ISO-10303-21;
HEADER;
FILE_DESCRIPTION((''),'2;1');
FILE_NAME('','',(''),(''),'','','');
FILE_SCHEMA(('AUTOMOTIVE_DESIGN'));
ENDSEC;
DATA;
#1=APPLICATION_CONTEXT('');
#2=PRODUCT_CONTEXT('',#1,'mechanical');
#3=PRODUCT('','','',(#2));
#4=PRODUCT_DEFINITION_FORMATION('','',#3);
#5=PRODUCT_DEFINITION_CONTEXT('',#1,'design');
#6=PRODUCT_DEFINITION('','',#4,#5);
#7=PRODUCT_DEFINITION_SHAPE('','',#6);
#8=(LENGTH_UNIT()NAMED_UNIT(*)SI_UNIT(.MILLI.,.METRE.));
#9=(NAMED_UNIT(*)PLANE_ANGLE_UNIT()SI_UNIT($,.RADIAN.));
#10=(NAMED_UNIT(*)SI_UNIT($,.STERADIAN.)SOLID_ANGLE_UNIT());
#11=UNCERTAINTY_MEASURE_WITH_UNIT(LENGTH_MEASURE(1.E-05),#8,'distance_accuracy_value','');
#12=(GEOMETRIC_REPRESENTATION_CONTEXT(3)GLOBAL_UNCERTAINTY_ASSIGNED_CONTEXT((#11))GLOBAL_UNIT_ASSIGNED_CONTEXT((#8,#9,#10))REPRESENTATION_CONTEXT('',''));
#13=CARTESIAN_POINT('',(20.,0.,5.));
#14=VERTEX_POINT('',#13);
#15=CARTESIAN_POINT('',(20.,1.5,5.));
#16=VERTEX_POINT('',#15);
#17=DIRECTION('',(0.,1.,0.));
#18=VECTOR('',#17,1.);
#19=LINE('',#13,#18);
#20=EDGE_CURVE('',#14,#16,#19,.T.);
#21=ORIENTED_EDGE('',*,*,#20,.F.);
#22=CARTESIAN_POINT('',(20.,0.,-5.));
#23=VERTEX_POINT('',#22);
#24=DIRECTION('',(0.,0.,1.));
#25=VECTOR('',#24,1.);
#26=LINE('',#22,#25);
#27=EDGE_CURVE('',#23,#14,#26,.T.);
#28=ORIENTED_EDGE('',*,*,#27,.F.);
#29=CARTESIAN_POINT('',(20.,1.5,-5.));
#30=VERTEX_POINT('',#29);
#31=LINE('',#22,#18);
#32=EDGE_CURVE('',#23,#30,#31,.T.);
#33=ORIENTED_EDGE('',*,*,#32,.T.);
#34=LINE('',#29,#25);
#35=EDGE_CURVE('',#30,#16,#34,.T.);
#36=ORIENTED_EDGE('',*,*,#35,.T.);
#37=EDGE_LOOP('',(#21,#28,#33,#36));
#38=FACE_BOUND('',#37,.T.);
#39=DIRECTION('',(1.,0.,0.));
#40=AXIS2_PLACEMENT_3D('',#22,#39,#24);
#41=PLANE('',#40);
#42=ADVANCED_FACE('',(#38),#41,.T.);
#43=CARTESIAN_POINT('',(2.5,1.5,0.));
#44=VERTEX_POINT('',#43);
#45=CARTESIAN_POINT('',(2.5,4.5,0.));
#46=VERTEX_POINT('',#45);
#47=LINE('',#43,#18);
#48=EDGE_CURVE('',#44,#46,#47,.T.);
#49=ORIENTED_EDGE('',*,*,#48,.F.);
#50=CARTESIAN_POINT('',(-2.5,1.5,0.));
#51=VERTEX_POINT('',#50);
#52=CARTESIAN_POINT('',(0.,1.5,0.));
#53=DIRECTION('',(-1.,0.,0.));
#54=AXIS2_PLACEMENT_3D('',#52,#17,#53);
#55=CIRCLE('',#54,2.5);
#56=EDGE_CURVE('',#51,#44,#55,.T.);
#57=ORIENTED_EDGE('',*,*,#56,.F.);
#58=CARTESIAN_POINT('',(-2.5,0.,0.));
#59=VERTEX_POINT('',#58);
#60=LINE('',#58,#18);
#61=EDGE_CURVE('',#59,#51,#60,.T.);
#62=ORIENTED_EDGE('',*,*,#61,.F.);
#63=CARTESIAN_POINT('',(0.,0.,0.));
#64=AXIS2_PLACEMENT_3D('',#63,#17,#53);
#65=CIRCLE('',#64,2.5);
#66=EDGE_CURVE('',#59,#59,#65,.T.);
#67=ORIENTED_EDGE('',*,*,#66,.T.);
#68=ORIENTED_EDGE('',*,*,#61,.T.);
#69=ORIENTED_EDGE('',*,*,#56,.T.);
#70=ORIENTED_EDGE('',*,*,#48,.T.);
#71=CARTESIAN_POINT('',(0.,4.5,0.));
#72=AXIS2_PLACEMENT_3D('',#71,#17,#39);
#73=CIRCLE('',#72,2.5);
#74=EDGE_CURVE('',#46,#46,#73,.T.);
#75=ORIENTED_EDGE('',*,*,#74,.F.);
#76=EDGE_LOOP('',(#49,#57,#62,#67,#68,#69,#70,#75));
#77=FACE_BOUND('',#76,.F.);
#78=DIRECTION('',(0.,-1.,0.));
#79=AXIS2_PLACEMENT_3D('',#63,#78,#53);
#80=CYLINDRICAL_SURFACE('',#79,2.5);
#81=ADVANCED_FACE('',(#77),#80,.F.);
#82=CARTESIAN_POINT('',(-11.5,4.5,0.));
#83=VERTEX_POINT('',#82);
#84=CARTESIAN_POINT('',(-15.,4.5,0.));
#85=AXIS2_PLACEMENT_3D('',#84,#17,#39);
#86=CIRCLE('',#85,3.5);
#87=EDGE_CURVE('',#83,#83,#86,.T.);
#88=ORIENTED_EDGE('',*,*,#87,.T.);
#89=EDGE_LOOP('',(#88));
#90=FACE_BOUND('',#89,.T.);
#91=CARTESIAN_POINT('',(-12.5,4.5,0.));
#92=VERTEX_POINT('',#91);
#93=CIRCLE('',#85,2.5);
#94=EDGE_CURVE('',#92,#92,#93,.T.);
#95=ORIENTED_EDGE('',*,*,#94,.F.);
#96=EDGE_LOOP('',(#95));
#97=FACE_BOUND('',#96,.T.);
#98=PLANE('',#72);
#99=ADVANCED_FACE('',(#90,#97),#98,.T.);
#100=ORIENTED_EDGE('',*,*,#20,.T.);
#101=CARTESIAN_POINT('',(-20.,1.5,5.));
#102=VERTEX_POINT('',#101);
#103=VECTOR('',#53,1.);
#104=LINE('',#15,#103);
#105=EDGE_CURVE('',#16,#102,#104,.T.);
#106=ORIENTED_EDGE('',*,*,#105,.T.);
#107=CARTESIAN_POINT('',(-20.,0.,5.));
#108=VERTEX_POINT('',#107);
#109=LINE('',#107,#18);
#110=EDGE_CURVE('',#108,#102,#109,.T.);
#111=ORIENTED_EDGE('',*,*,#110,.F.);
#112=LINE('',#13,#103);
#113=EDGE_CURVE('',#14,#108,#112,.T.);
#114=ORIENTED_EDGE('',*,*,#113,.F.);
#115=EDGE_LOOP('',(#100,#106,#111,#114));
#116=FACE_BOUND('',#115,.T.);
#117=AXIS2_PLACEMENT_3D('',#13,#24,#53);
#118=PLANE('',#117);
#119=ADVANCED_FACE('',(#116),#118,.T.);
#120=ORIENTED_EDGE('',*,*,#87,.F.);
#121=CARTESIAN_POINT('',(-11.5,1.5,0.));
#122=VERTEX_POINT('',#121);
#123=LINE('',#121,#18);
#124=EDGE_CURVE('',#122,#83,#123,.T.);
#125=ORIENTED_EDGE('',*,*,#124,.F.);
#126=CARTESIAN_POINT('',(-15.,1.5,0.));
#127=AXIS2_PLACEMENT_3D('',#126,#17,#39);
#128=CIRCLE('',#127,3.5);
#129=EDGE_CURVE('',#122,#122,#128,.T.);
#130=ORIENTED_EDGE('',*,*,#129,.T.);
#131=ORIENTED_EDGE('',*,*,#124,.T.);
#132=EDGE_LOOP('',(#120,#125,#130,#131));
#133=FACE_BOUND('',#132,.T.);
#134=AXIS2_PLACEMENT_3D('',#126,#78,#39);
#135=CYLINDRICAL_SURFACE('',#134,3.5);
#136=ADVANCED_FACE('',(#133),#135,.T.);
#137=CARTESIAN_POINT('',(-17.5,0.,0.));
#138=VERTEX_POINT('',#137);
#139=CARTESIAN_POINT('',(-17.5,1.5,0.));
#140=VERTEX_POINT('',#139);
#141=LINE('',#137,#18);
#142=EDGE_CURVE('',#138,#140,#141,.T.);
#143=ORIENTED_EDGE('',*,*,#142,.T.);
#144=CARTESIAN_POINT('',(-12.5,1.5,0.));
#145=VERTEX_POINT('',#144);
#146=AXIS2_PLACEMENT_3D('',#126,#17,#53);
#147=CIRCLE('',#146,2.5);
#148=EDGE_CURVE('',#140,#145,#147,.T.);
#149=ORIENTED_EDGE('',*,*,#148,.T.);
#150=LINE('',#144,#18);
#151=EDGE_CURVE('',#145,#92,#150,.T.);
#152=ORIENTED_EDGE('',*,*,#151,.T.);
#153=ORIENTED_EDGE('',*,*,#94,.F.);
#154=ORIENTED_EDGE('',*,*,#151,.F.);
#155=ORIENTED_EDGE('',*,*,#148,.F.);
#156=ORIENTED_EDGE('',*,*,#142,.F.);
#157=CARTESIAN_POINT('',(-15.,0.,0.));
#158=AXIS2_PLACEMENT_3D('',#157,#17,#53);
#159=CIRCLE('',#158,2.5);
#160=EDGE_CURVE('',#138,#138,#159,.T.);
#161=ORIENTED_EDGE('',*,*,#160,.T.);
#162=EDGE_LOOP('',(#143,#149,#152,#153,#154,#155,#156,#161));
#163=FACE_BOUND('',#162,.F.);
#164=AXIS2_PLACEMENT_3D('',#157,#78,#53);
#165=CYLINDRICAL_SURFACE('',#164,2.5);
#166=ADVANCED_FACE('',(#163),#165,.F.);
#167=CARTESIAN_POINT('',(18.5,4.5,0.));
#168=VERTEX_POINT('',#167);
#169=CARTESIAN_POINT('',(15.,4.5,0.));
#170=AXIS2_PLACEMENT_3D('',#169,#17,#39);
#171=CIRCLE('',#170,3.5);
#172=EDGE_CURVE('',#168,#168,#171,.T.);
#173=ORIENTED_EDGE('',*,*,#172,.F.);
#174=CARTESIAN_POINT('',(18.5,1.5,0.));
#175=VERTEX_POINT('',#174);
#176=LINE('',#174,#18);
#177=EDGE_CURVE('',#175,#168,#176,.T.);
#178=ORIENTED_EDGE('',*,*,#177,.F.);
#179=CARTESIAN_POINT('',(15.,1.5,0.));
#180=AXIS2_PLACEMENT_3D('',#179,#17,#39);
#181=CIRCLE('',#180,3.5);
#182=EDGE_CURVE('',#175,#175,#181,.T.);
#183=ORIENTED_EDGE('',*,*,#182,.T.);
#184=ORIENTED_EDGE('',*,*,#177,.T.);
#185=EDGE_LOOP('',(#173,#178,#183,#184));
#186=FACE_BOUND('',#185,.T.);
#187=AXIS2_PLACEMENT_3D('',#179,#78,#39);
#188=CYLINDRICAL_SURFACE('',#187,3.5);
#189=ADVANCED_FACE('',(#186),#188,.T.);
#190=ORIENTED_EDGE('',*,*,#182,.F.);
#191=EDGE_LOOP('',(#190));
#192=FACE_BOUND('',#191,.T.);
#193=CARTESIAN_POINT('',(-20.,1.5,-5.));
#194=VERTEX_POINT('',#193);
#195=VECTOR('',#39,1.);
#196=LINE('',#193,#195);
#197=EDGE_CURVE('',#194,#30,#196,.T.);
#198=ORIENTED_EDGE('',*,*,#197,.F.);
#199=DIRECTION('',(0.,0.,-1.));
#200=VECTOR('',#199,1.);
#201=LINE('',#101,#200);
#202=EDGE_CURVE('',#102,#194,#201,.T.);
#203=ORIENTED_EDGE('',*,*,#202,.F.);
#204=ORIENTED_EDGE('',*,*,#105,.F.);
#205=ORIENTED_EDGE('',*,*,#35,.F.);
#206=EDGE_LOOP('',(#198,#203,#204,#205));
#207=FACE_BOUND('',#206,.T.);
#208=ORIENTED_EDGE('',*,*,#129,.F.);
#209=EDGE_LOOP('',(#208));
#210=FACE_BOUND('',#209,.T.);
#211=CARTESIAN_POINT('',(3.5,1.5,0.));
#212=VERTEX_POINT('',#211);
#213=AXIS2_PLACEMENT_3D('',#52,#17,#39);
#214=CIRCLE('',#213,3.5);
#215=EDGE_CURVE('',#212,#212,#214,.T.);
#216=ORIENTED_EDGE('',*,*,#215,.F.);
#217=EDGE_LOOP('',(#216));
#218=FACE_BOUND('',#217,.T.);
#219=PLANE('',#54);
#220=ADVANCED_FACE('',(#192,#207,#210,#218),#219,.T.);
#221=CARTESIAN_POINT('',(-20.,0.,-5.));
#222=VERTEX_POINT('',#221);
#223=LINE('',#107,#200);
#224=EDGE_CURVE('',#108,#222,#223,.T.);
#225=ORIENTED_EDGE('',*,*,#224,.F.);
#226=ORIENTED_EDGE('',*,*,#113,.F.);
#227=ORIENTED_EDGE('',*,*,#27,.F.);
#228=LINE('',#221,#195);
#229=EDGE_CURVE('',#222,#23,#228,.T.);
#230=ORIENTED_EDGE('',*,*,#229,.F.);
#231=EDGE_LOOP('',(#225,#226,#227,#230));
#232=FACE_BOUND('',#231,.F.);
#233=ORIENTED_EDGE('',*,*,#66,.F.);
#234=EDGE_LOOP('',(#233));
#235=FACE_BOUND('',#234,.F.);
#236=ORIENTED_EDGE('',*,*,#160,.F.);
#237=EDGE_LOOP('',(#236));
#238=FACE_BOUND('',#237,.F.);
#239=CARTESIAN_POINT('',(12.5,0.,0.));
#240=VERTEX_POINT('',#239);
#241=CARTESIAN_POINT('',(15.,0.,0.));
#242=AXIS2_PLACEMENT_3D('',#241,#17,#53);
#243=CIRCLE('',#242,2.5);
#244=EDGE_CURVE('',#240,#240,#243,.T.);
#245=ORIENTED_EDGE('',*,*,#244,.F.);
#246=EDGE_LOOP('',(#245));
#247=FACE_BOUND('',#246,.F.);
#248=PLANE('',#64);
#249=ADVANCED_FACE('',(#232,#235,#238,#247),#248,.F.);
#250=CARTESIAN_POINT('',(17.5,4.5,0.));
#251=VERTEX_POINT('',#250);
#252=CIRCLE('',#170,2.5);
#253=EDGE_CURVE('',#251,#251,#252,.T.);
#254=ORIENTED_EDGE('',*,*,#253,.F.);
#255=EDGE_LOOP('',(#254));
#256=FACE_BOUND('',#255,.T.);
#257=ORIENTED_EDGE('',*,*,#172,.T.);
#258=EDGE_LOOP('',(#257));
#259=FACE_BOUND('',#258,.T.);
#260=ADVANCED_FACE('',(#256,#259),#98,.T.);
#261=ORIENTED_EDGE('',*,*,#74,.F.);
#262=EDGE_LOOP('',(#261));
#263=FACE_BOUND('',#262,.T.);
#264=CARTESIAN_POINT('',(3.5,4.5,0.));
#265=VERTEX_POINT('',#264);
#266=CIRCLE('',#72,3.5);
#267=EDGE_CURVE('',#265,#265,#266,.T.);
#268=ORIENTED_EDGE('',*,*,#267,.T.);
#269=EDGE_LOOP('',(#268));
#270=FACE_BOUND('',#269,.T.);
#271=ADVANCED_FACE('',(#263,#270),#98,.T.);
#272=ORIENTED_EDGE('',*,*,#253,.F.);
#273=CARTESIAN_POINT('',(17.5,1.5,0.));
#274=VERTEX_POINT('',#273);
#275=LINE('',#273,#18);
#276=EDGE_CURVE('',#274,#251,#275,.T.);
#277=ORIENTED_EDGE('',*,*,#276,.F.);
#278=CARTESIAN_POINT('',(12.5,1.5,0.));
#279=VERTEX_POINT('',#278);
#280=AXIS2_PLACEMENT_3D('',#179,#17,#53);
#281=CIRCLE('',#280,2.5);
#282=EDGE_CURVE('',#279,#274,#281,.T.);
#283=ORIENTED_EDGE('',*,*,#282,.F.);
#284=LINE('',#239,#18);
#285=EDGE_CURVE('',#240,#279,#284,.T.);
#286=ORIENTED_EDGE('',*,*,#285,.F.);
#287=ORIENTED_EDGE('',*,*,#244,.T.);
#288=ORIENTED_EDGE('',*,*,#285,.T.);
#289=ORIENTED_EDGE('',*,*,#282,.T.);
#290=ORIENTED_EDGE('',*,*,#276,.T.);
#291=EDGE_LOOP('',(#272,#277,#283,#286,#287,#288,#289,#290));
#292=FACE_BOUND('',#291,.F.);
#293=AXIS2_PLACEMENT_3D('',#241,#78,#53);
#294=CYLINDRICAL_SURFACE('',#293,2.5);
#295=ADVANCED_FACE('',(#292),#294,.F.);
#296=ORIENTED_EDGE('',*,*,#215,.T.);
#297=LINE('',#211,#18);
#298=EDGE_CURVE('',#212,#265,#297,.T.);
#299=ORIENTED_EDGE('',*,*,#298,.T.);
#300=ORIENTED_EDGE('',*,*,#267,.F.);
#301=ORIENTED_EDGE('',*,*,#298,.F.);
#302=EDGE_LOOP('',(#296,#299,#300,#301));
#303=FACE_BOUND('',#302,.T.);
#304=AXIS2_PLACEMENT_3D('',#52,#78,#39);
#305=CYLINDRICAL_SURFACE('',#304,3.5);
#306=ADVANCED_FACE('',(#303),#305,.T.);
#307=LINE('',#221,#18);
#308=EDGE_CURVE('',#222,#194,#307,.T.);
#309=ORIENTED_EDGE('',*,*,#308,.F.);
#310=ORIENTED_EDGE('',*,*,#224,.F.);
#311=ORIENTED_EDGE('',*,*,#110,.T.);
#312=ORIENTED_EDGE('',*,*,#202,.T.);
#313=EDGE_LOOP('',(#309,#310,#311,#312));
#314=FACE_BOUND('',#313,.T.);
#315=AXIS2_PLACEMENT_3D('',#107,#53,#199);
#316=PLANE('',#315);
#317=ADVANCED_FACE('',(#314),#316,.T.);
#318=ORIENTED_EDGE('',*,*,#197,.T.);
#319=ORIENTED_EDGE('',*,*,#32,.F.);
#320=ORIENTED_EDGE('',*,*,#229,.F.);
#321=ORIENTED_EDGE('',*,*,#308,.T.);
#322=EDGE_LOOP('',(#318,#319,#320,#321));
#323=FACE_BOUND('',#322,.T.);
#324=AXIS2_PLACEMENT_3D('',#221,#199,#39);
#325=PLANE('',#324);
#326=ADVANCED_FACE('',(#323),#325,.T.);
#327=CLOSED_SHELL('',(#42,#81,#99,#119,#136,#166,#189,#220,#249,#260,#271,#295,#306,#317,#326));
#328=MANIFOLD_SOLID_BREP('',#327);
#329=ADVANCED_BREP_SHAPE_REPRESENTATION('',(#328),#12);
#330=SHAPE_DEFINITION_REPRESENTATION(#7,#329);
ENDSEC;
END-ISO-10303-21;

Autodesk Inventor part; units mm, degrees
ref_plane "YZ Plane" through (0, 0, 0) normal (1, 0, 0) x (0, 1, 0)
ref_plane "XZ Plane" through (0, 0, 0) normal (0, 1, 0) x (-1, 0, 0)
ref_plane "XY Plane" through (0, 0, 0) normal (0, 0, 1) x (1, 0, 0)
sketch "Sketch1" plane through (0, 0, 0) normal (0, 1, 0) x (-1, 0, 0)
  line L0 (20, -5) -> (-20, -5)
  line L1 (-20, -5) -> (-20, 5)
  line L2 (-20, 5) -> (20, 5)
  line L3 (20, 5) -> (20, -5)
  circle A0 centre (0, 0) radius 2.5
  line L4 (0, 0) -> (15, 0)
  circle A1 centre (15, 0) radius 2.5
  line L5 (0, 0) -> (-15, 0)
  circle A2 centre (-15, 0) radius 2.5
  dimension "d0" = 40
  dimension "d1" = 10
  dimension "d13" = 5
  dimension "d14" = 15
  dimension "d15" = 5
  dimension "d16" = 15
  dimension "d17" = 5
extrude "Extrusion1" add sketch "Sketch1" along normal blind 1.5
sketch "Sketch4" plane through (0, 1.5, 0) normal (0, 1, 0) x (1, 0, 0)
  circle A0 centre (0, 0) radius 3.5
  circle A1 centre (-15, 0) radius 3.5
  circle A2 centre (15, 0) radius 3.5
  circle A3 centre (-15, 0) radius 2.5
  circle A4 centre (0, 0) radius 2.5
  circle A5 centre (15, 0) radius 2.5
  dimension "d18" = 7
  dimension "d21" = 7
  dimension "d22" = 7
  dimension "d23" = 1
  dimension "d24" = 1
  dimension "d25" = 1
extrude "Extrusion3" add sketch "Sketch4" along normal blind 3
properties part number "GANJEL LED"
